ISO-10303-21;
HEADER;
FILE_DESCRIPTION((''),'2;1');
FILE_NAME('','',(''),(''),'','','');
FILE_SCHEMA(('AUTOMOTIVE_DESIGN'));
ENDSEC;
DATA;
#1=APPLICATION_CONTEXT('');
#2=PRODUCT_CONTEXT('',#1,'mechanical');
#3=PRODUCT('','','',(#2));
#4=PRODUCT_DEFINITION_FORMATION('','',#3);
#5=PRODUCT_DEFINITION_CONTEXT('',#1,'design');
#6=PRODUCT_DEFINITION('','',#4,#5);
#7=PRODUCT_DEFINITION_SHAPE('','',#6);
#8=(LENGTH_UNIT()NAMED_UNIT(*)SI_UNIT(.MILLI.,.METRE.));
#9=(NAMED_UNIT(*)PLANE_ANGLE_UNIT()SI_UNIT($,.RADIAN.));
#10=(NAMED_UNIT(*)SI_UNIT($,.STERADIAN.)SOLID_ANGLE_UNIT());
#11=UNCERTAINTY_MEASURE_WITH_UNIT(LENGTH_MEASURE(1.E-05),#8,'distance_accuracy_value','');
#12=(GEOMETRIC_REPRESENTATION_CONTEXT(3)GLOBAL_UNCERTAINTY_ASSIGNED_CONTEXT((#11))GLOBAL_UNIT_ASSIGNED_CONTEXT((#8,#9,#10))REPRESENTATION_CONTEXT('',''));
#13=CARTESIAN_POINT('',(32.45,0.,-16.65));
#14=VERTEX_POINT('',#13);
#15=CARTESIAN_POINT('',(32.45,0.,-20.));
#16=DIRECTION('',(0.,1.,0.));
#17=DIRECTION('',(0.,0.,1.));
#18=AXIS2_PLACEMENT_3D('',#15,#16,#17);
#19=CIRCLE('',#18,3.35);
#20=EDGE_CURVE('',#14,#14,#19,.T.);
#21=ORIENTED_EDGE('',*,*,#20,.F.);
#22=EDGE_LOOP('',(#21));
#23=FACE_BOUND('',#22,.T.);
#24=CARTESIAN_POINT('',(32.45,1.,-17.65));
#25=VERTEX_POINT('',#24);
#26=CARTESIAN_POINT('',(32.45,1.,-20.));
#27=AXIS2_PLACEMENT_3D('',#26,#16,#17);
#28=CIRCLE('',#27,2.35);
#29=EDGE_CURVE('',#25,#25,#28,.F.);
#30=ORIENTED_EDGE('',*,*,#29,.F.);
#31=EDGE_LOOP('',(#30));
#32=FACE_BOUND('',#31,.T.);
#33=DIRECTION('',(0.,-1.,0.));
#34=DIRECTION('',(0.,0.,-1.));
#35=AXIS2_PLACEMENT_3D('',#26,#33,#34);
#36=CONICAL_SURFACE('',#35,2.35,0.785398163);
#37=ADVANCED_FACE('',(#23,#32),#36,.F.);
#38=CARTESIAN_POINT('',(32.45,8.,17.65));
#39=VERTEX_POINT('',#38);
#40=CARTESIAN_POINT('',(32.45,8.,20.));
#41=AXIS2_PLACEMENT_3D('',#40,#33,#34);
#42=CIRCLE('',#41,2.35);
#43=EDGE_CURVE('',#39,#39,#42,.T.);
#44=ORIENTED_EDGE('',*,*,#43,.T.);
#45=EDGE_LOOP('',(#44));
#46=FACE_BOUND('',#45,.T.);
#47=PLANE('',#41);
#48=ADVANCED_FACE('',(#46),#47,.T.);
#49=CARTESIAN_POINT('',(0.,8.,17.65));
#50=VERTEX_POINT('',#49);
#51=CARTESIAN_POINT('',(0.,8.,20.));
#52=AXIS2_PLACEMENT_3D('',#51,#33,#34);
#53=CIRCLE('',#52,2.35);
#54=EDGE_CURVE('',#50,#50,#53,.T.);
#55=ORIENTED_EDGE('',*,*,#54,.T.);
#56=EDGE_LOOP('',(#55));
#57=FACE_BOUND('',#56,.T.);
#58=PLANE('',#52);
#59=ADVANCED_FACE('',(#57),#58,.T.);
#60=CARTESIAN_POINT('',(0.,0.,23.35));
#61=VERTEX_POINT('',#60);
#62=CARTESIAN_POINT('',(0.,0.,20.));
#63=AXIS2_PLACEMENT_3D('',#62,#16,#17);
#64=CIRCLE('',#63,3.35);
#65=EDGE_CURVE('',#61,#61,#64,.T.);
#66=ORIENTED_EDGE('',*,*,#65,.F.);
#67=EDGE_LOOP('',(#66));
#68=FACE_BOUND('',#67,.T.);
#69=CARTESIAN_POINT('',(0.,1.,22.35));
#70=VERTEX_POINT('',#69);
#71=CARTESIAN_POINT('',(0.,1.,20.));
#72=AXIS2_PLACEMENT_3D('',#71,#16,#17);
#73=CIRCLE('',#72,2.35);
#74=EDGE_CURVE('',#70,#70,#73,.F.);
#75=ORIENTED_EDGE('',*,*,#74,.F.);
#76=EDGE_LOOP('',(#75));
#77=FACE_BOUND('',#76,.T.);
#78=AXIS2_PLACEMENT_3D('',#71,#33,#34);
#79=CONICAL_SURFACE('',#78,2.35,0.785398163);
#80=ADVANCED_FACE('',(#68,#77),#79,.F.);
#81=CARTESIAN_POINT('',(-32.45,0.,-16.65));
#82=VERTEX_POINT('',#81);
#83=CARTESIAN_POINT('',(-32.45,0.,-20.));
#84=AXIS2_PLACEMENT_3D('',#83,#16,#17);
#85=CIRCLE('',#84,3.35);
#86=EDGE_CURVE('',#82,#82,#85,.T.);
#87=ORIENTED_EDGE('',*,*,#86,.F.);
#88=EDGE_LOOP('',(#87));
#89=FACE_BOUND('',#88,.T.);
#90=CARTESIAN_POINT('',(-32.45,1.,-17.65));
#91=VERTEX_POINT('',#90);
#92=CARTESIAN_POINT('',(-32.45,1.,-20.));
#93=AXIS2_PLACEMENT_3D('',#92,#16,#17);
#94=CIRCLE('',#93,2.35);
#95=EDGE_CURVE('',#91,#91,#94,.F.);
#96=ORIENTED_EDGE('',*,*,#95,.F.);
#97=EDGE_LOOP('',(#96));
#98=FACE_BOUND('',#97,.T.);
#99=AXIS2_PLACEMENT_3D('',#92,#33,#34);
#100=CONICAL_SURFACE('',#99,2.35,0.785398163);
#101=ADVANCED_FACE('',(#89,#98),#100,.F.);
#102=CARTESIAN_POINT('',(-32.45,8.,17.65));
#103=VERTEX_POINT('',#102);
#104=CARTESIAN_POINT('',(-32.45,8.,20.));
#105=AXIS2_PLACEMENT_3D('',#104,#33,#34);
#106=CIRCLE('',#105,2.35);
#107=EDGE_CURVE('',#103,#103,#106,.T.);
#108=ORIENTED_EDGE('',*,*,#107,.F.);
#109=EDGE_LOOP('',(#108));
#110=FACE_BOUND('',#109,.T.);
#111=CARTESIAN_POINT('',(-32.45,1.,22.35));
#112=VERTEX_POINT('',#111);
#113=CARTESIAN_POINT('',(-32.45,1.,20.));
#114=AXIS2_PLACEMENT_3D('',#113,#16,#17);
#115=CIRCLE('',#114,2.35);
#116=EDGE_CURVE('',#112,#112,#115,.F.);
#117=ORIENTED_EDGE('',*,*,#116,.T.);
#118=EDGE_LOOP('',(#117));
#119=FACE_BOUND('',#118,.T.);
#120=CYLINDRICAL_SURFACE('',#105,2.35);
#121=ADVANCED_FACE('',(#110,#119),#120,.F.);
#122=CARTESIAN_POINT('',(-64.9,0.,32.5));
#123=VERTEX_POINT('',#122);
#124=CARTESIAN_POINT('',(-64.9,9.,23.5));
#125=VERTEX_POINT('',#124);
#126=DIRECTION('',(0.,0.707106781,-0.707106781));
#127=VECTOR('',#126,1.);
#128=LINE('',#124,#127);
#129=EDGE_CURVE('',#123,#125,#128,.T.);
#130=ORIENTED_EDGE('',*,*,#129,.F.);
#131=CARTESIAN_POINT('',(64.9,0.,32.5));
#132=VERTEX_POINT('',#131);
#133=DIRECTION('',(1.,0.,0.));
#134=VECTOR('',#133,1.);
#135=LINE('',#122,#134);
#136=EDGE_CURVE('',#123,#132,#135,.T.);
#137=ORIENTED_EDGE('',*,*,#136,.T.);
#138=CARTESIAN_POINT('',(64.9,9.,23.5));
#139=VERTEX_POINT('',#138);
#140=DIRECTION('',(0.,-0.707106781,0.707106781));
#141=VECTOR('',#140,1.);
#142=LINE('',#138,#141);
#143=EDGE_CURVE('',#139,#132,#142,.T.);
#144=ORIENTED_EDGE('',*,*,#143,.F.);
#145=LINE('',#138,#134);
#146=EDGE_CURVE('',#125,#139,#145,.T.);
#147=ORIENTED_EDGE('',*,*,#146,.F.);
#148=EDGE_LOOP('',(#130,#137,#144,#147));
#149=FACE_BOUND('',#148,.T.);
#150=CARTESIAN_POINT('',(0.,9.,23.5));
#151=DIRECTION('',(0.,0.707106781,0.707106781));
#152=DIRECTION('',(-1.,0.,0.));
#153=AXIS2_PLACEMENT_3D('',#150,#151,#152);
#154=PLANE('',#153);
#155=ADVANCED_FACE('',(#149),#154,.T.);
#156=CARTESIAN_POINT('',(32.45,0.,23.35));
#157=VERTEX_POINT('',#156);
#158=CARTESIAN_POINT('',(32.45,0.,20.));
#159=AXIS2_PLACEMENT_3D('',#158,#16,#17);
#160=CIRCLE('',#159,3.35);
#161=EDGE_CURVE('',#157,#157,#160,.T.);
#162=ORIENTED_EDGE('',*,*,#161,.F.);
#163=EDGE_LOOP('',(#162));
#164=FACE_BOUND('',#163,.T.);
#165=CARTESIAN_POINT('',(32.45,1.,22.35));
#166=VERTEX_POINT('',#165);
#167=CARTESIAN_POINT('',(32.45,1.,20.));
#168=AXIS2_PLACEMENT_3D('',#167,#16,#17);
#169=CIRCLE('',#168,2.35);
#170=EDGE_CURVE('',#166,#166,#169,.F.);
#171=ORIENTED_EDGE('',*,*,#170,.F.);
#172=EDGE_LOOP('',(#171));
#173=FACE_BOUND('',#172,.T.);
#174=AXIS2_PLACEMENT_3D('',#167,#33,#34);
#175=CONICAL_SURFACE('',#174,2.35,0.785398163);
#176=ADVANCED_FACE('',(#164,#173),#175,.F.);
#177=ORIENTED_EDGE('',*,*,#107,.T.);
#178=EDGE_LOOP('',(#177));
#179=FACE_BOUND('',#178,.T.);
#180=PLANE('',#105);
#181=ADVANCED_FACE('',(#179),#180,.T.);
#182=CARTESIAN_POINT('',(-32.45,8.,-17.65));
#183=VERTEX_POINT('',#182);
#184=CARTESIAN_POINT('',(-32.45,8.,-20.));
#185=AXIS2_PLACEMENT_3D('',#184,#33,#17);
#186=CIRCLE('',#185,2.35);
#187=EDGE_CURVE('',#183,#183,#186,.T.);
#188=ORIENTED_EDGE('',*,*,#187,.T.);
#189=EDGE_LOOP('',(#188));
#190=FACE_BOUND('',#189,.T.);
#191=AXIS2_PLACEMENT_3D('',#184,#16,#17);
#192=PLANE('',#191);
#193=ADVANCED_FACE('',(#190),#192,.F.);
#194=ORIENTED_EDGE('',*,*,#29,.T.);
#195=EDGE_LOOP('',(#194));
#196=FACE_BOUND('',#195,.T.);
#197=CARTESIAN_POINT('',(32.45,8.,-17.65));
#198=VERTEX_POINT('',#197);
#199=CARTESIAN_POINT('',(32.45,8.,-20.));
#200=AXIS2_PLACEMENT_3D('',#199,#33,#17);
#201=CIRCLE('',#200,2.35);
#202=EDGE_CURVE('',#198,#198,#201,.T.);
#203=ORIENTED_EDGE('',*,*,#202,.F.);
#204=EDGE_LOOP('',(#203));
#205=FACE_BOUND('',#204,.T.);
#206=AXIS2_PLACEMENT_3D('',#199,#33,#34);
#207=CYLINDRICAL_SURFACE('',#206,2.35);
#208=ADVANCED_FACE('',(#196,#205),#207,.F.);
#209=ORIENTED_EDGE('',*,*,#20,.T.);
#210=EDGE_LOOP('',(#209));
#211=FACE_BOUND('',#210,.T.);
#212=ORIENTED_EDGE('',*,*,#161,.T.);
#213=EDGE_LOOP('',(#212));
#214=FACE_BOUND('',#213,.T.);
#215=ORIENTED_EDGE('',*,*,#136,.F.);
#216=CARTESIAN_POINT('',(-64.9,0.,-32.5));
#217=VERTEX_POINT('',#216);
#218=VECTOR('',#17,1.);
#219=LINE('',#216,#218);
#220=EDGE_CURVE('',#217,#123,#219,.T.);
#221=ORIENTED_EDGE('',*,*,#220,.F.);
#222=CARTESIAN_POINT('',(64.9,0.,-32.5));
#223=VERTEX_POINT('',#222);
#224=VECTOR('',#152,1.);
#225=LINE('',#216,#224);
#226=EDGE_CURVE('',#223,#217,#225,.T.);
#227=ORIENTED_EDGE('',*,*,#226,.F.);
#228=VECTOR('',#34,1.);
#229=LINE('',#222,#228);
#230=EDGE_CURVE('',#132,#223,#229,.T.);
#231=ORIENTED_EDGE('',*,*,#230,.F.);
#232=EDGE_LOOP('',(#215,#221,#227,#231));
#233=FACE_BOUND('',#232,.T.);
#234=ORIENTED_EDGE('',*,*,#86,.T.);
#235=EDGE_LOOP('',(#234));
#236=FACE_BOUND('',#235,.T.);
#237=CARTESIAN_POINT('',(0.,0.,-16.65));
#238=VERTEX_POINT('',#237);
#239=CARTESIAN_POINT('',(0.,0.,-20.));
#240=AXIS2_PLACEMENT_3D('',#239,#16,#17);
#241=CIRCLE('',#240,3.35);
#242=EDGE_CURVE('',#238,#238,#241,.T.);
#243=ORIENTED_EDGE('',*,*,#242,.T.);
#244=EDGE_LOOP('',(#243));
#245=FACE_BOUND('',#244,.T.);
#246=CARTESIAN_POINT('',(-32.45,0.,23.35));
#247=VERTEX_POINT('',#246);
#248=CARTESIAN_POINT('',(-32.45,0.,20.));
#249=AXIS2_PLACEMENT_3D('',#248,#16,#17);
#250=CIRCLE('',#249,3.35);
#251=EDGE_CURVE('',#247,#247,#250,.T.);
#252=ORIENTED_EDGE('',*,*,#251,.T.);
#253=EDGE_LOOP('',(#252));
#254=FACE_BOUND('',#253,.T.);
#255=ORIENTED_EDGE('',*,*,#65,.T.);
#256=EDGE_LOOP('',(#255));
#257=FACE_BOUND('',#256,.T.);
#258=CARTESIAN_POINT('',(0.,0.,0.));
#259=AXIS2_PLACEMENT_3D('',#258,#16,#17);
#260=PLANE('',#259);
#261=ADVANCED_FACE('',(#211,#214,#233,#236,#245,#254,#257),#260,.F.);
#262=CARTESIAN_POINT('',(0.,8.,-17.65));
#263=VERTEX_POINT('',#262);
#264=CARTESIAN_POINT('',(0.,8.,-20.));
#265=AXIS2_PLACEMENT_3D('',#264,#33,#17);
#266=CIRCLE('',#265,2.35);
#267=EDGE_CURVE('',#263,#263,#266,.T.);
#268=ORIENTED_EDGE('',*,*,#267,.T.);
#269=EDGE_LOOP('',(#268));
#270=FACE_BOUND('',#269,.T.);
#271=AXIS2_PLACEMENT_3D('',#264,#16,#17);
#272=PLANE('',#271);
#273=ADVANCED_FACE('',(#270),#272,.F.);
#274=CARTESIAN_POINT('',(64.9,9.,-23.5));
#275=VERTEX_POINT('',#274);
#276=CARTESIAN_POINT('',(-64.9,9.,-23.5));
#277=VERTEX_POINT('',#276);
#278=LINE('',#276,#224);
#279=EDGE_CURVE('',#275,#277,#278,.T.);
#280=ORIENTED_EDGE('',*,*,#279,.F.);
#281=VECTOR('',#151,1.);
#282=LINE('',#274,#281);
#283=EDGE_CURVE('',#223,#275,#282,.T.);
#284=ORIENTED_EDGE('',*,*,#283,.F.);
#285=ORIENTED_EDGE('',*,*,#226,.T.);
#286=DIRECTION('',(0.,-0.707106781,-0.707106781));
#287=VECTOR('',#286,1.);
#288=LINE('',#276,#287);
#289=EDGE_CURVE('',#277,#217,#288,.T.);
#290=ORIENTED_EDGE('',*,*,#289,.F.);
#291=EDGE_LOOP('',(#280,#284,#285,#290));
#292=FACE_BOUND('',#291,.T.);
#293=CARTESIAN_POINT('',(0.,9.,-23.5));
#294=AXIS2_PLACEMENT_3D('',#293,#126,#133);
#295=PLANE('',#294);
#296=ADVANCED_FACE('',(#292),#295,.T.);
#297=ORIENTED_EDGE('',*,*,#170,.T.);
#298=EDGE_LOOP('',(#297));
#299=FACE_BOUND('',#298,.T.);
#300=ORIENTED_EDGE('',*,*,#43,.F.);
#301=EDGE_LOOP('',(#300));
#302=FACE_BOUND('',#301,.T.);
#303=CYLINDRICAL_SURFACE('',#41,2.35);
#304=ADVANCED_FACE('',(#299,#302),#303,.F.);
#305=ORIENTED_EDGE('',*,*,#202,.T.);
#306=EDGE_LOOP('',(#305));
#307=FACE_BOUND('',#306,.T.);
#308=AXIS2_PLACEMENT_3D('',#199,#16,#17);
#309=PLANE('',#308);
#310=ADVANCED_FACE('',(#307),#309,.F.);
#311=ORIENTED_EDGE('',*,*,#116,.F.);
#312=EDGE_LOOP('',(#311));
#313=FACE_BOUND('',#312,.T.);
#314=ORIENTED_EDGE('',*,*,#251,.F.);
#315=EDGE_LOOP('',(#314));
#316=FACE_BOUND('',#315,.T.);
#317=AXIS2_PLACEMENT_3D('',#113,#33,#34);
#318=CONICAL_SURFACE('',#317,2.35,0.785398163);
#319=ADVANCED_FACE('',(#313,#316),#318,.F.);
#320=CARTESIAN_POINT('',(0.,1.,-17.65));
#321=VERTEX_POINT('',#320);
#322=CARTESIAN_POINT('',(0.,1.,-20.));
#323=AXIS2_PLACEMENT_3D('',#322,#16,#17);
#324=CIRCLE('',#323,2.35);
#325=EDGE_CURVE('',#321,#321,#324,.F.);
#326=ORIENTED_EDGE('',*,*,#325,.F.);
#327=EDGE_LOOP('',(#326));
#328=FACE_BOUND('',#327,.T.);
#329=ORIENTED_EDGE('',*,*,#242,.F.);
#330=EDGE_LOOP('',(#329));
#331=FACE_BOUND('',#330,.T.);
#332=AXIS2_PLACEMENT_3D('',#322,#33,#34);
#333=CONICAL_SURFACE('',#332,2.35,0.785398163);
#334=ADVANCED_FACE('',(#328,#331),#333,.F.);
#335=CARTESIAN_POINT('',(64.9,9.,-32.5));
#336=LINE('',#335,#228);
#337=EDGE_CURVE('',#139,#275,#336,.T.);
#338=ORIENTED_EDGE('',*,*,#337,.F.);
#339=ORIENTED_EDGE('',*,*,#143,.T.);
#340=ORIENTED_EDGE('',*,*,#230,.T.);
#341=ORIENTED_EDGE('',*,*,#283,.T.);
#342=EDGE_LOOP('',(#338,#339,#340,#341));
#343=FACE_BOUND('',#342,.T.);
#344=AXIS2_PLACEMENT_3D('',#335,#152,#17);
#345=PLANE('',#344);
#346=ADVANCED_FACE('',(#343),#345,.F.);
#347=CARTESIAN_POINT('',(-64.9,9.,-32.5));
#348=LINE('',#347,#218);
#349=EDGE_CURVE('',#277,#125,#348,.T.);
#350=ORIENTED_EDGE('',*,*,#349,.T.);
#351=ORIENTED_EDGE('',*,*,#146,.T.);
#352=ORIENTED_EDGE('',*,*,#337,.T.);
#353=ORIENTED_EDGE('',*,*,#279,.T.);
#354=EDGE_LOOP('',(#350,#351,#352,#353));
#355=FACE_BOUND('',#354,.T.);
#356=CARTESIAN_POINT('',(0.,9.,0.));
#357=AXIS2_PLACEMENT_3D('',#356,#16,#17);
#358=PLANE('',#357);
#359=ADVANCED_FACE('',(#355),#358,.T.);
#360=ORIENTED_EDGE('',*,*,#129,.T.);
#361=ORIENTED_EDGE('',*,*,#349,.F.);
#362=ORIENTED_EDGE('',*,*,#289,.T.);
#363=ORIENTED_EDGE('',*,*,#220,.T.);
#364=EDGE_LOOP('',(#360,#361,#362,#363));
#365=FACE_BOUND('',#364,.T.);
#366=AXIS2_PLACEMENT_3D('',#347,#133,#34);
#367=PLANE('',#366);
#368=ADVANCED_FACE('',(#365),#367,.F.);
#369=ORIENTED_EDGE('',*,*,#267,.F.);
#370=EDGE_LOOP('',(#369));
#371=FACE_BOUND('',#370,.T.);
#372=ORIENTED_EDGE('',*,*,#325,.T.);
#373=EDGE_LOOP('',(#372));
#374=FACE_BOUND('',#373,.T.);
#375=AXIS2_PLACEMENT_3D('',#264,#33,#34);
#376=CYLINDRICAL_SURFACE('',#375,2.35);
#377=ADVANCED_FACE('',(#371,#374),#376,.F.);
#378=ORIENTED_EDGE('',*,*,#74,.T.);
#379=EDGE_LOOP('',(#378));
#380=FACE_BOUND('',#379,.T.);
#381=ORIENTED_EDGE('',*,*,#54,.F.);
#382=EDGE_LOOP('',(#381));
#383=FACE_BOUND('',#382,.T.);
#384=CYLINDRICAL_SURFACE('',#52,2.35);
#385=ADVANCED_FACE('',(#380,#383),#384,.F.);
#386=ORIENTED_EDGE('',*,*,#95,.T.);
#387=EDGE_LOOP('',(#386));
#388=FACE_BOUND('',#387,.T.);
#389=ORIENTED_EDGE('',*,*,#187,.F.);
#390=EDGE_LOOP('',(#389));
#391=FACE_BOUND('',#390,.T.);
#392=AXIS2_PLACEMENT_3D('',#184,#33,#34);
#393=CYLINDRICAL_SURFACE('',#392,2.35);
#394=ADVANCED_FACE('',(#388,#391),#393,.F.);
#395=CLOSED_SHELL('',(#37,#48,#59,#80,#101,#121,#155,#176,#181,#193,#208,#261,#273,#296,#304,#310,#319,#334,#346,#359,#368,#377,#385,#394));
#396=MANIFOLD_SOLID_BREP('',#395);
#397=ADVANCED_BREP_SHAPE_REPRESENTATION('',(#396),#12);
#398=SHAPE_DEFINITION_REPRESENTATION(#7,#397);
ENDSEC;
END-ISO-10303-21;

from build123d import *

# Parameters (mm, degrees)
SKETCH1_W           = 129.8
SKETCH1_H           = 65
BOSS_EXTRUDE1_DEPTH = 9
SKETCH2_R           = 2.35
CUT_EXTRUDE1_DEPTH  = 8
CHAMFER1_SIZE       = 1
CHAMFER2_SIZE       = 9


with BuildPart() as part:
    # Sketch1 → Boss-Extrude1 (new body)
    with BuildSketch(Plane(origin=(0, 0, 0), x_dir=(1, 0, 0), z_dir=(0, 1, 0))):
        Rectangle(SKETCH1_W, SKETCH1_H)
    extrude(amount=BOSS_EXTRUDE1_DEPTH)

    # Sketch2 → Cut-Extrude1 (cut)
    with BuildSketch(Plane.XZ):
        with Locations(Location((-32.45, 20, 0), (0, 0, 270))):
            Circle(SKETCH2_R)
        with Locations(Location((0, 20, 0), (0, 0, 270))):
            Circle(SKETCH2_R)
        with Locations(Location((32.45, 20, 0), (0, 0, 270))):
            Circle(SKETCH2_R)
        with Locations(Location((32.45, -20, 0), (0, 0, 90))):
            Circle(SKETCH2_R)
        with Locations(Location((0, -20, 0), (0, 0, 90))):
            Circle(SKETCH2_R)
        with Locations(Location((-32.45, -20, 0), (0, 0, 90))):
            Circle(SKETCH2_R)
    extrude(amount=-CUT_EXTRUDE1_DEPTH, mode=Mode.SUBTRACT)

    # Chamfer1
    chamfer1_edges = [part.edges().sort_by_distance(p)[0] for p in [
        (-32.45, 0, -22.35),
        (0, 0, -22.35),
        (32.45, 0, -22.35),
        (32.45, 0, 22.35),
        (0, 0, 22.35),
        (-32.45, 0, 22.35),
    ]]
    chamfer(chamfer1_edges, length=CHAMFER1_SIZE)

    # Chamfer2
    chamfer2_edges = [part.edges().sort_by_distance(p)[0] for p in [
        (0, 9, 32.5),
        (0, 9, -32.5),
    ]]
    chamfer(chamfer2_edges, length=CHAMFER2_SIZE - 0.0001)  # a hair under: the kernel refuses the full size


solid = part.part
